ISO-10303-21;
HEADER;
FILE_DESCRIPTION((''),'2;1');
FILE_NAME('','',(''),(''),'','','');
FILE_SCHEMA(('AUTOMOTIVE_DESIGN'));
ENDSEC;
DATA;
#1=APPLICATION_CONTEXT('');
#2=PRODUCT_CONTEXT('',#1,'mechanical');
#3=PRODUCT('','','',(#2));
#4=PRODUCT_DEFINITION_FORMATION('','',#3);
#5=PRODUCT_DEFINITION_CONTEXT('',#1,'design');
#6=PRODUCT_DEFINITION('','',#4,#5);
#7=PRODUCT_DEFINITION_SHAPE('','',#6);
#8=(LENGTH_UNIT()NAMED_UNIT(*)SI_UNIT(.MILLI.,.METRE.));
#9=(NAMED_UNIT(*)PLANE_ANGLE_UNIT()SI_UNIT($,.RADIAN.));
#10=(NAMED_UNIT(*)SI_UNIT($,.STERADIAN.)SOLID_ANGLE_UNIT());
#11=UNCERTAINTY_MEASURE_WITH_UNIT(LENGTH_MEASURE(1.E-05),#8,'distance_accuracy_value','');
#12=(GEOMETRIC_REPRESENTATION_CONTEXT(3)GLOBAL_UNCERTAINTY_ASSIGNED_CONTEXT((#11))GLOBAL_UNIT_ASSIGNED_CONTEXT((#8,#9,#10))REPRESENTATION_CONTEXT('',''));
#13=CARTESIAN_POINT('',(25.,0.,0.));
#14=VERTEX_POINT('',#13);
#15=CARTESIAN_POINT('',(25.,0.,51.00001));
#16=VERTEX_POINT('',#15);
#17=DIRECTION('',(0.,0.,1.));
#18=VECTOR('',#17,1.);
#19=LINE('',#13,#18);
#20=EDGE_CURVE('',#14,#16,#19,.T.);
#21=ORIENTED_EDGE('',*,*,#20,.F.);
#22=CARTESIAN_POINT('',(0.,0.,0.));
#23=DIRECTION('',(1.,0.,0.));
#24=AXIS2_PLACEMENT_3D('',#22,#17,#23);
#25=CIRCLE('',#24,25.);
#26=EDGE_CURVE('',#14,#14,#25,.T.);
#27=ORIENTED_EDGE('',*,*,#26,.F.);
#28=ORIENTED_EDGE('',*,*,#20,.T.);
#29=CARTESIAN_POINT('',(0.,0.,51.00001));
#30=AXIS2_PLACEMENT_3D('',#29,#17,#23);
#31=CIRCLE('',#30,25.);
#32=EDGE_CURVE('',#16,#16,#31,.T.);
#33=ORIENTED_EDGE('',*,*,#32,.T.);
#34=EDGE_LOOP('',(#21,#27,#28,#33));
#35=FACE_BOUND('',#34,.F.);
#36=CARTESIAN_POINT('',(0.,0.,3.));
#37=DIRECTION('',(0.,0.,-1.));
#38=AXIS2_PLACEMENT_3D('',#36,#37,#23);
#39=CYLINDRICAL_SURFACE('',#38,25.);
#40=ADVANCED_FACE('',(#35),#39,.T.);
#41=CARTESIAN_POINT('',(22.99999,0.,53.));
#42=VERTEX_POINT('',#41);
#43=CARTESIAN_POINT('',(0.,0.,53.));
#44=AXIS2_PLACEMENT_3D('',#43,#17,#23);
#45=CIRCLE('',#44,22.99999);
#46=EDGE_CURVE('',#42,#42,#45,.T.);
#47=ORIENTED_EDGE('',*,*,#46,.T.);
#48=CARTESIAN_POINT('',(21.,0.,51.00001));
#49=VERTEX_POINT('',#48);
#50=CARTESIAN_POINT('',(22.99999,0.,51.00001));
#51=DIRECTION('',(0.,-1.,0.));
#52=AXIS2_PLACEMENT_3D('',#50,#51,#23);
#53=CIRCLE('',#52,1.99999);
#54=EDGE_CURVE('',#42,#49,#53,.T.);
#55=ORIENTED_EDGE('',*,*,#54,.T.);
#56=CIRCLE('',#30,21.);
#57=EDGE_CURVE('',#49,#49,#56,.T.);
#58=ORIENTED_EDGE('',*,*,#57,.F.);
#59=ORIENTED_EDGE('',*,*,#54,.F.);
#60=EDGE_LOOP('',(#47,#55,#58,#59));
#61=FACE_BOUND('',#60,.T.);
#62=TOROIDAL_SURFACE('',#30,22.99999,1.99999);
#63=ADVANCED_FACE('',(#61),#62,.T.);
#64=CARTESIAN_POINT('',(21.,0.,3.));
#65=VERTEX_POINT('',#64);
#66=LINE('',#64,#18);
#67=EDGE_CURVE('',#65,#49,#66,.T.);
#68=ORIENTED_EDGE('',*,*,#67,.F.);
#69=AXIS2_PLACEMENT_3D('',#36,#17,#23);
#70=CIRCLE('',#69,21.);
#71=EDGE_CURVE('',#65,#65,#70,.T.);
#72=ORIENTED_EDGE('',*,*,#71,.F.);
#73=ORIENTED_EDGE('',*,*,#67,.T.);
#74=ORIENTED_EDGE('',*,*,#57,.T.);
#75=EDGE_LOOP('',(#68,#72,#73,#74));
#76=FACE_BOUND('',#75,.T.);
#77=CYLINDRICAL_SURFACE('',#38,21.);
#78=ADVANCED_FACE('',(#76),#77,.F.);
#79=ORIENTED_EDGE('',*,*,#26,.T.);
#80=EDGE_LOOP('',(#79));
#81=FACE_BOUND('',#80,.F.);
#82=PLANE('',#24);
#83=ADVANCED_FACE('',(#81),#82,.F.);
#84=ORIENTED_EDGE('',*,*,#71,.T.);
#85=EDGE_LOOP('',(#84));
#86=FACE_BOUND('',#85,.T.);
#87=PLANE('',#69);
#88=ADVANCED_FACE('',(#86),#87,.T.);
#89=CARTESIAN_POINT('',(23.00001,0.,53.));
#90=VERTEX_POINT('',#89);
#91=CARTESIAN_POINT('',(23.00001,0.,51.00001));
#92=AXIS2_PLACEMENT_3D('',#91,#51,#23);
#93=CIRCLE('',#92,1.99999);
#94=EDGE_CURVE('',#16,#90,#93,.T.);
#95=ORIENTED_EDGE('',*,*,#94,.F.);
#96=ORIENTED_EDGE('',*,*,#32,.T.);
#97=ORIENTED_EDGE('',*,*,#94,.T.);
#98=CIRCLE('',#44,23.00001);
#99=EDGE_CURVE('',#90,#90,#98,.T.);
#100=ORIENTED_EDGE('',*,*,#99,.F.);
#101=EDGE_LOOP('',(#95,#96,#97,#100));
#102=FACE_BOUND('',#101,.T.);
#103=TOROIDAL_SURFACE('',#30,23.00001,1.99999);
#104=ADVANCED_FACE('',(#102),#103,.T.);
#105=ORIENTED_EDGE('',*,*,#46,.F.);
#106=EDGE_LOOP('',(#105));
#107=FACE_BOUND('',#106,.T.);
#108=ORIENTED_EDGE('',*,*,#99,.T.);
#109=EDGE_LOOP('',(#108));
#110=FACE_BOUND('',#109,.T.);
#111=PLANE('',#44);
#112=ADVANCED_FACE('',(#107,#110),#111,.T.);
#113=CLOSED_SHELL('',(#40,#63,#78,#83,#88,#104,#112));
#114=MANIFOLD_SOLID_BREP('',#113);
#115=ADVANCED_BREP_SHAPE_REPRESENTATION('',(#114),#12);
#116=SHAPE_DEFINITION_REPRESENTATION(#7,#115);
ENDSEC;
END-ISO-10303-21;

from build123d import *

# Parameters (mm, degrees)
F0_R     = 25
F1_DEPTH = 3
F2_R     = 25
F2_R_2   = 21
F3_DEPTH = 50
F4_R     = 1.99999


# Not quite as in the source:
# - a fillet or chamfer is up to 0.001 mm smaller than in the source, because OpenCascade refuses the exact size


with BuildPart() as f1:
    # F0 (on Top) → F1 (new body)
    with BuildSketch(Plane.XY):
        Circle(F0_R)
    extrude(amount=F1_DEPTH)

    # F2 (on face) → F3 (join)
    with BuildSketch(Plane.XY.offset(3)):
        Circle(F2_R)
        Circle(F2_R_2, mode=Mode.SUBTRACT)
    extrude(amount=F3_DEPTH)

    # F4 (radius 2 in the source; OpenCascade refuses exactly that, so slightly less here)
    f4_edges = [f1.edges().sort_by_distance(p)[0] for p in [
        (-25, 0, 53),
        (-21, 0, 53),
    ]]
    fillet(f4_edges, radius=F4_R)


solid = f1.part
